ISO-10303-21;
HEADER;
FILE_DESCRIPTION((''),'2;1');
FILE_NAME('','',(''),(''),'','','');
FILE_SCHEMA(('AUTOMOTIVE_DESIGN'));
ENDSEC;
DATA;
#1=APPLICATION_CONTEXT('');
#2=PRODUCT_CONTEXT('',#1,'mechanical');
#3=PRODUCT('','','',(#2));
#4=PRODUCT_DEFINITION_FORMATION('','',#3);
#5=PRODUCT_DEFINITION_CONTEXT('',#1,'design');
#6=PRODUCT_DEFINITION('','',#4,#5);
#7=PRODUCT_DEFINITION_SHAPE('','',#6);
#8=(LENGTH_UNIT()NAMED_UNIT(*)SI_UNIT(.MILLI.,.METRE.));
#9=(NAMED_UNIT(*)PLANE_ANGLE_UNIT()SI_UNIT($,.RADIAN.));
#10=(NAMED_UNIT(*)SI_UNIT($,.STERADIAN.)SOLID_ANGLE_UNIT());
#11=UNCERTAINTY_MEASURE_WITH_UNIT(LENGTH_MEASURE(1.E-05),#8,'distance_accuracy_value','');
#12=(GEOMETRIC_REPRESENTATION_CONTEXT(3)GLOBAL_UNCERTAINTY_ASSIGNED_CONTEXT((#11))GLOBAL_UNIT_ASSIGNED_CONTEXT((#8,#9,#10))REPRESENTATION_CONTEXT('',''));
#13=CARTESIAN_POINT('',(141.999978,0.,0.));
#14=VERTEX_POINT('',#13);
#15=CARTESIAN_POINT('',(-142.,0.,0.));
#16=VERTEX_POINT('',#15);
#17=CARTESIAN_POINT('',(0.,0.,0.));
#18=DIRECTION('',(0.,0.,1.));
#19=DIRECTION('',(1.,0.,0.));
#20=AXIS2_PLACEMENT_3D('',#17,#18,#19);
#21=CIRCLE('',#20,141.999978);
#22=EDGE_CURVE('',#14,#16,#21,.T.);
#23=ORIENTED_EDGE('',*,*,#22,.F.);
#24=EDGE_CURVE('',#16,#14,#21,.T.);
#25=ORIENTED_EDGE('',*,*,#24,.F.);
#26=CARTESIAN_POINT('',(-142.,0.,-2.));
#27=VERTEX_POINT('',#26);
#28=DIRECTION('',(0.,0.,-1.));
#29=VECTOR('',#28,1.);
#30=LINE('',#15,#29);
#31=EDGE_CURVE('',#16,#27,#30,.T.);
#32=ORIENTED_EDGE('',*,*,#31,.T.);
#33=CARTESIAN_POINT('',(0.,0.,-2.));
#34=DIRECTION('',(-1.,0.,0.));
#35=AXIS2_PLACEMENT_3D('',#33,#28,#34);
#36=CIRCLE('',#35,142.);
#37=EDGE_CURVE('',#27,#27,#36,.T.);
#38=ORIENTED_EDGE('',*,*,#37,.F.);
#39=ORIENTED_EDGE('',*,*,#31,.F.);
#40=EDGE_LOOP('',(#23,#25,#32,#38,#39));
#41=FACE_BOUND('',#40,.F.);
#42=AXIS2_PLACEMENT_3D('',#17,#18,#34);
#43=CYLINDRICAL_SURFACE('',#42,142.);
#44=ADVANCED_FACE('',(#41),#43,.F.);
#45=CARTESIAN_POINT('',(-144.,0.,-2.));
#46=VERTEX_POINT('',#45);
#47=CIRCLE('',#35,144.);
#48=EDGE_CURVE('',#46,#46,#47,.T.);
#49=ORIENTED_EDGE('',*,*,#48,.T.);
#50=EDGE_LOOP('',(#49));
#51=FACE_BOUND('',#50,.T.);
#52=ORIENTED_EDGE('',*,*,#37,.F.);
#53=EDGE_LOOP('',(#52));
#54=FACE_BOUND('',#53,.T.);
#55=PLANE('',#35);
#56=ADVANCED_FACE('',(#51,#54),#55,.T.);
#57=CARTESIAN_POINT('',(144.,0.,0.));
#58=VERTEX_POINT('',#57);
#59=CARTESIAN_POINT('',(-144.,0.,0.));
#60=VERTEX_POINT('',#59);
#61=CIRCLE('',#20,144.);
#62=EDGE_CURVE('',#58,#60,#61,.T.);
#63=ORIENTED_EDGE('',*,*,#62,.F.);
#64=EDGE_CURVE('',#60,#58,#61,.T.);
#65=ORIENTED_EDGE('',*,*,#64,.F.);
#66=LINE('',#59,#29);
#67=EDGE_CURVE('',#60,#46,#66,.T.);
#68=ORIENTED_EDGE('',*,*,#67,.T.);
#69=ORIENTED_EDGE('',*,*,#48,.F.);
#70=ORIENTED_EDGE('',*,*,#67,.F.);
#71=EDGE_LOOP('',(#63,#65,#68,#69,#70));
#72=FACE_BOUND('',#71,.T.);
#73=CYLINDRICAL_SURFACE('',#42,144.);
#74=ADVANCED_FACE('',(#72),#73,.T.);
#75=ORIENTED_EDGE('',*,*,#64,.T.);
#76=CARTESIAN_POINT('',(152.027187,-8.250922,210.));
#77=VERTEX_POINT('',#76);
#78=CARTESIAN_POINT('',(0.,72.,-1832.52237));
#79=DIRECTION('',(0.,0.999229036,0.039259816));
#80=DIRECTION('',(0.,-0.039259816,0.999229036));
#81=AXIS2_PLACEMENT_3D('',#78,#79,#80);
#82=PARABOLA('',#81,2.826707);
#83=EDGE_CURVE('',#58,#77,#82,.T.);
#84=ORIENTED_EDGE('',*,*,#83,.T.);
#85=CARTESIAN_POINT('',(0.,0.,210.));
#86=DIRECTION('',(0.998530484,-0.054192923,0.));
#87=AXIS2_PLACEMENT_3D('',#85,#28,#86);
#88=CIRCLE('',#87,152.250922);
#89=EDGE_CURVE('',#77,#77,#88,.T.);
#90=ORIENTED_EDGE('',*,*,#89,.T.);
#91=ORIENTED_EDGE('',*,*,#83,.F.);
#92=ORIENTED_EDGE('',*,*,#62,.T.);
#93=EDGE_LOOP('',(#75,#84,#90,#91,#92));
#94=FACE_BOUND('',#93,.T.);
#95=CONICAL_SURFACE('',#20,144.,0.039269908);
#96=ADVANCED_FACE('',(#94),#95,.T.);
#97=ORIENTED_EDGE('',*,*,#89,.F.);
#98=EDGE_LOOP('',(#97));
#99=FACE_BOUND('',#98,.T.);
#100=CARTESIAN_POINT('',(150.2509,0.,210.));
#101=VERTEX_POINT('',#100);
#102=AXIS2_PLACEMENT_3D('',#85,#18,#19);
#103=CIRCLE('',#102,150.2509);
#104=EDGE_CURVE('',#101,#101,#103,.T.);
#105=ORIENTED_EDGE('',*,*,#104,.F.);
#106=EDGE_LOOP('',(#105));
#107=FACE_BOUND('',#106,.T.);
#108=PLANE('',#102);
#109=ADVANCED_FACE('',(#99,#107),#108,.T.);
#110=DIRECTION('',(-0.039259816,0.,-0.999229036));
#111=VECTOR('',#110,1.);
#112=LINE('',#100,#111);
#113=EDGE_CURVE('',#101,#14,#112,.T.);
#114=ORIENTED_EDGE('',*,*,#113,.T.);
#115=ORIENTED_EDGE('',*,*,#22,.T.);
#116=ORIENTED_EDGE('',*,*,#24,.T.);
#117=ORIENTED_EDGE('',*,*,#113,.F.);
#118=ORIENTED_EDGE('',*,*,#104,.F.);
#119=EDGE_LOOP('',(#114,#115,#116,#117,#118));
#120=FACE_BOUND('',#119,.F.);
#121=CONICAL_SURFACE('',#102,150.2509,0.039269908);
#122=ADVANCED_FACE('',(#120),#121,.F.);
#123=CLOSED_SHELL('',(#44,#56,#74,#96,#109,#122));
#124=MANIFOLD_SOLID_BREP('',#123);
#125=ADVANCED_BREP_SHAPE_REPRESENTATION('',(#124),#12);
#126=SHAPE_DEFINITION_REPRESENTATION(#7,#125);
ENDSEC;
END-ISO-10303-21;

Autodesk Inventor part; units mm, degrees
ref_plane "YZ Plane" through (0, 0, 0) normal (1, 0, 0) x (0, 1, 0)
ref_plane "XZ Plane" through (0, 0, 0) normal (0, 1, 0) x (-1, 0, 0)
ref_plane "XY Plane" through (0, 0, 0) normal (0, 0, 1) x (1, 0, 0)
sketch "Skizze3" plane through (0, 0, 0) normal (0, 0, 1) x (1, 0, 0)
  line L0 (-201.6, 0) -> (201.6, 0) projected
  line L1 (0, -201.6) -> (0, 201.6) projected
  circle A0 centre (0, 0) radius 144
  dimension "d4" = 288
extrude "Extrusion2" add sketch "Skizze3" along normal blind 210 draft 2.25
sketch "Skizze4" plane through (0, 0, 210) normal (0, 0, 1) x (1, 0, 0)
  circle A0 centre (0, 0) radius 150.2509
  circle A1 centre (0, 0) radius 152.2509 projected
  dimension "d7" = 2
extrude "Extrusion3" cut sketch "Skizze4" against normal blind 210 draft -2.25 contours A0
sketch "Skizze5" plane through (0, 0, 0) normal (0, 0, -1) x (-1, 0, 0)
  circle A0 centre (0, 0) radius 144 projected
  circle A1 centre (0, 0) radius 144
  circle A2 centre (0, 0) radius 142
extrude "Extrusion4" add sketch "Skizze5" along normal blind 2
properties part number "Abdeckungsrohr"
